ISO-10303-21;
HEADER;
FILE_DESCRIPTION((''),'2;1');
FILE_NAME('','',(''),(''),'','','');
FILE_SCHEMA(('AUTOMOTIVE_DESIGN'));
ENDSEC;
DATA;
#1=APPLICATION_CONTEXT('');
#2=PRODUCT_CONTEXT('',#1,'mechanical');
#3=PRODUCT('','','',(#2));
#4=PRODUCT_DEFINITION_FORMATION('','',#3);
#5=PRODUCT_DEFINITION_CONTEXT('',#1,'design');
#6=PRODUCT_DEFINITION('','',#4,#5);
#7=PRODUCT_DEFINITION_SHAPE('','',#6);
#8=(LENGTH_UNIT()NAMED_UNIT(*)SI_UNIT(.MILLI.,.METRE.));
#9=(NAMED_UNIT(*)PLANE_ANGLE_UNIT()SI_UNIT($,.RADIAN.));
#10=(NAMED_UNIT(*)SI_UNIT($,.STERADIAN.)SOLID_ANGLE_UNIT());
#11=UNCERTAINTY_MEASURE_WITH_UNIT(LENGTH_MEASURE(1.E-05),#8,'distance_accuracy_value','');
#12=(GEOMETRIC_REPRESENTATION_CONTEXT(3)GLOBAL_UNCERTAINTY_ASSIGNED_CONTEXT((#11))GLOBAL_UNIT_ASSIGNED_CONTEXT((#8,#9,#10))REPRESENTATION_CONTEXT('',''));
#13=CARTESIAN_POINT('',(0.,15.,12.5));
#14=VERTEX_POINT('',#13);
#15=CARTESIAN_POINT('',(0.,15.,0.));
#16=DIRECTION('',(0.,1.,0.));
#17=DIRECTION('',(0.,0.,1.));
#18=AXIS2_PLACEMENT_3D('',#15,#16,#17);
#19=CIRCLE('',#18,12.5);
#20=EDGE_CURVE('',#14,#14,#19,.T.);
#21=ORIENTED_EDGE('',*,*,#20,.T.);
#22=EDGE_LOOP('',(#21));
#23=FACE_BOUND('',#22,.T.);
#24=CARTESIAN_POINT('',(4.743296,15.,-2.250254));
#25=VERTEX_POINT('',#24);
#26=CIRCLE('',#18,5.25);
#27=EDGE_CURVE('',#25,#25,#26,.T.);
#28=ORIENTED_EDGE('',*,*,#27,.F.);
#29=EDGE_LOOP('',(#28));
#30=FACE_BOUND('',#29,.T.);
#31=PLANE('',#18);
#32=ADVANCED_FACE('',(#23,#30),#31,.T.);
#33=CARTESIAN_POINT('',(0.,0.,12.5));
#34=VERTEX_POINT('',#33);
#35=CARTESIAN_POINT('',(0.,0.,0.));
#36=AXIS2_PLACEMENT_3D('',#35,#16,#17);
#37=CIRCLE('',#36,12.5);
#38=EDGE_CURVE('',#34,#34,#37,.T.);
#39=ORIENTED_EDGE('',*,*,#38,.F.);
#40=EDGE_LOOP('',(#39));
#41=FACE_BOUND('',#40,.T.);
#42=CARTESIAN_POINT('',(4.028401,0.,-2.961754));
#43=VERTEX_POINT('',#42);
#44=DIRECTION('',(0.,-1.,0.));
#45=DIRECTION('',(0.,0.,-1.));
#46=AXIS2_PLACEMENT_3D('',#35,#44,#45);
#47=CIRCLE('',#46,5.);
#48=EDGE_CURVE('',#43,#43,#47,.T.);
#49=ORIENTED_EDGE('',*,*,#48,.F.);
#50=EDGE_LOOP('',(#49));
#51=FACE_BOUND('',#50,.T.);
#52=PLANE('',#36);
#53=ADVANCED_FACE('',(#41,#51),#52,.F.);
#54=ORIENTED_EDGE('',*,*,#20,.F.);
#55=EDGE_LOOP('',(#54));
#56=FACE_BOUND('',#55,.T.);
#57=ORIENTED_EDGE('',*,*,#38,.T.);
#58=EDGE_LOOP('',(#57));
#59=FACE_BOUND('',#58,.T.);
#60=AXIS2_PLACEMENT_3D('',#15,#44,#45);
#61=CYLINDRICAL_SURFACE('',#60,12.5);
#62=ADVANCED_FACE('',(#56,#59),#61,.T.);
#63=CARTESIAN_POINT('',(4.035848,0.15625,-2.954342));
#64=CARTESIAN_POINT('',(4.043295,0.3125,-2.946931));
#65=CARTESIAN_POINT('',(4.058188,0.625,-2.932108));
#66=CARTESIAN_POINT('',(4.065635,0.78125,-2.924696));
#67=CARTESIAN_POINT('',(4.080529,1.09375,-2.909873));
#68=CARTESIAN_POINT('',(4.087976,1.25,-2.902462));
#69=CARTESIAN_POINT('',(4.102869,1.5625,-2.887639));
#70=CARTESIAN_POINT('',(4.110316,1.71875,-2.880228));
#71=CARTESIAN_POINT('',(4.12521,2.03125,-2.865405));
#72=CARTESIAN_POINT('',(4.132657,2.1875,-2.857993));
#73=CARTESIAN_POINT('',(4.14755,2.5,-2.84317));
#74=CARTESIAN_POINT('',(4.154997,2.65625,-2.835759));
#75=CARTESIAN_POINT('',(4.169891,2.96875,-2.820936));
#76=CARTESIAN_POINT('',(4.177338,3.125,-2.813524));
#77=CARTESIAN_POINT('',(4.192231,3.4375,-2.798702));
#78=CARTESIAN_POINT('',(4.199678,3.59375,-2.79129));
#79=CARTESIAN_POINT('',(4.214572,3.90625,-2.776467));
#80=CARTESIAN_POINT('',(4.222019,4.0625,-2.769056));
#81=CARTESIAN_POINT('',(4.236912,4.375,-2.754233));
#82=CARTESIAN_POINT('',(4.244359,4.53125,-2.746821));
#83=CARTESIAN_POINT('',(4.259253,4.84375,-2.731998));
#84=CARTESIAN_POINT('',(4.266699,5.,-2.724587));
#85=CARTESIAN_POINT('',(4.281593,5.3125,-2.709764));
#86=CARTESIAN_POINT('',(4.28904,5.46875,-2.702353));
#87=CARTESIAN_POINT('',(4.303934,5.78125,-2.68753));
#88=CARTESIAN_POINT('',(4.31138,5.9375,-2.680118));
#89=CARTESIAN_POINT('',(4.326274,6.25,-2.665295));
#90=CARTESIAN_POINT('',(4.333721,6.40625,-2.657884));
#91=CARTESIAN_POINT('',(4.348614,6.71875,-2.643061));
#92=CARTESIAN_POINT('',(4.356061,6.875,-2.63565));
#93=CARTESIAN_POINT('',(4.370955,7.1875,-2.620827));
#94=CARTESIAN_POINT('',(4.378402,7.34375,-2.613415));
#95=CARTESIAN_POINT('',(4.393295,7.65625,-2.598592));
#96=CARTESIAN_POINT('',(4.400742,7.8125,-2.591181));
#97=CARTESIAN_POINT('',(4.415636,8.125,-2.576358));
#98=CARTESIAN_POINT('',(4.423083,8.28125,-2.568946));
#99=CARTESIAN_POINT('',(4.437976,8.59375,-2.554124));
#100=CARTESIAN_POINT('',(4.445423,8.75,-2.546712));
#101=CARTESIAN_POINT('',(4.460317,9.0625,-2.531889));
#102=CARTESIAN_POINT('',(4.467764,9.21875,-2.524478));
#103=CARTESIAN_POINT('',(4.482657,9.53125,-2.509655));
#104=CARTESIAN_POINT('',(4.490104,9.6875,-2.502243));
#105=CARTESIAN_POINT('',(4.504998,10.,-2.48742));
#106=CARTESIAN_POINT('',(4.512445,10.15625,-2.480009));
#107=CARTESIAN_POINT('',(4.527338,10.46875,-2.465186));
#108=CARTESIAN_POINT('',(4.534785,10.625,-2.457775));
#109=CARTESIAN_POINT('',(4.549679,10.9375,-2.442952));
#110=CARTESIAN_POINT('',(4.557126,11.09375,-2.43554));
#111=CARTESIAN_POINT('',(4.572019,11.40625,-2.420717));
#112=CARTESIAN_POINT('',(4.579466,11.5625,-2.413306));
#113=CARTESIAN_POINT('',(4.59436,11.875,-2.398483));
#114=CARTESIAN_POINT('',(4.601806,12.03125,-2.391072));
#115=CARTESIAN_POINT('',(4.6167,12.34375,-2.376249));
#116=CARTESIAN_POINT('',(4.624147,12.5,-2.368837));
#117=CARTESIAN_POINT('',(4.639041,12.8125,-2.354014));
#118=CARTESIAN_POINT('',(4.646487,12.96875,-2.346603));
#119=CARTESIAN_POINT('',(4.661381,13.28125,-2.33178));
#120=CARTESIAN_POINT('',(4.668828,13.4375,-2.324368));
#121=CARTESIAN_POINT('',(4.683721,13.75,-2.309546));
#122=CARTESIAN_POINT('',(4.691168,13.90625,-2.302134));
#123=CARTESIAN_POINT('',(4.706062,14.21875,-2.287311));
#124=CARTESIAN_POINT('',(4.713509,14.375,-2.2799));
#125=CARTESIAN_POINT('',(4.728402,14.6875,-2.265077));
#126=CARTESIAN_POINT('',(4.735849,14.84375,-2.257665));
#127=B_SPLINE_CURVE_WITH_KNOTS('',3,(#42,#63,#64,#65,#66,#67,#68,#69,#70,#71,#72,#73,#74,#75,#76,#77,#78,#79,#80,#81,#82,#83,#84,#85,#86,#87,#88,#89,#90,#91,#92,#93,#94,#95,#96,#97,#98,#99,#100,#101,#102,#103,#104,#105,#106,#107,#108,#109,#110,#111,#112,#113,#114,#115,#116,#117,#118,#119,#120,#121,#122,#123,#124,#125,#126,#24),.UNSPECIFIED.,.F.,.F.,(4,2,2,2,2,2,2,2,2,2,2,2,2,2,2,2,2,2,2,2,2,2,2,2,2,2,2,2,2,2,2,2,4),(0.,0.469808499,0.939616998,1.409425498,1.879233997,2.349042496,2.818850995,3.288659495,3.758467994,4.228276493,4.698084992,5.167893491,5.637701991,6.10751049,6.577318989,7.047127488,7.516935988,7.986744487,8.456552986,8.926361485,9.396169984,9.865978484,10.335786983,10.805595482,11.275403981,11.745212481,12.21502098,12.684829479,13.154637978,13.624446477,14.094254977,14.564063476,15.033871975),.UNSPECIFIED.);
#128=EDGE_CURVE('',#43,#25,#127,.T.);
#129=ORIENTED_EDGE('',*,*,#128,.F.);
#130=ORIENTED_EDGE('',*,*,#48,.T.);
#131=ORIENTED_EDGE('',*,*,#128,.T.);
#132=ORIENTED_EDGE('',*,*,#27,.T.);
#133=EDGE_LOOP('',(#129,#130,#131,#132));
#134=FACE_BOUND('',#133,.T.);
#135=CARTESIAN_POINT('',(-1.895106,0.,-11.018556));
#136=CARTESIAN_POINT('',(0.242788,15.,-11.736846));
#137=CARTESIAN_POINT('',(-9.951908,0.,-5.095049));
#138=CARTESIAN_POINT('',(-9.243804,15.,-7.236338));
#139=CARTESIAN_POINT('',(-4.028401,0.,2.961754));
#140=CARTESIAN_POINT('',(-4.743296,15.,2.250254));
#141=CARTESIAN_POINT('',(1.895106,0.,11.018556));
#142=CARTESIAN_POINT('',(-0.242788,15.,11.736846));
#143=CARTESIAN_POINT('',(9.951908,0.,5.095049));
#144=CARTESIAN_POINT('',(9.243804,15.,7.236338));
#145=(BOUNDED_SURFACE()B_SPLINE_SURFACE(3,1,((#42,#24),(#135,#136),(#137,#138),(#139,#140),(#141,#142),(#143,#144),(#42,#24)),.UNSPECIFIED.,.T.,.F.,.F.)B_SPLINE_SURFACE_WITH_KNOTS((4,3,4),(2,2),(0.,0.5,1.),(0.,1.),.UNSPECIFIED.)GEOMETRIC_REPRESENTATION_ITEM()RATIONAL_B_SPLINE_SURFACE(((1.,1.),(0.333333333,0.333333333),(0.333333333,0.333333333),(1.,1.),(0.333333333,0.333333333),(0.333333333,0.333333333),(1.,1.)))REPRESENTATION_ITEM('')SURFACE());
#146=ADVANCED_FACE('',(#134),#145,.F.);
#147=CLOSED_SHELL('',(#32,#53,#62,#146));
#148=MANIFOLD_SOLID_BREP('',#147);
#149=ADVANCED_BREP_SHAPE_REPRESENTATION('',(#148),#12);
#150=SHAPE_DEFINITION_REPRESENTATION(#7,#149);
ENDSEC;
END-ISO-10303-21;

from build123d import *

# Parameters (mm, degrees)
SKETCH1_R           = 12.5
SKETCH1_R_2         = 5
BOSS_EXTRUDE1_DEPTH = 15


with BuildPart() as part:
    # Sketch1 → Boss-Extrude1 (new body)
    with BuildSketch(Plane(origin=(0, 0, 0), x_dir=(1, 0, 0), z_dir=(0, 1, 0))):
        with Locations(Location((0, 0, 0), (0, 0, 270))):
            Circle(SKETCH1_R)
        with Locations(Location((0, 0, 0), (0, 0, 270))):
            Circle(SKETCH1_R_2, mode=Mode.SUBTRACT)
    extrude(amount=BOSS_EXTRUDE1_DEPTH)

    # Cut-Loft1: read off the stored shape, not the designer's step
    # Cut-Loft1: loft between two sections, ruled curve by curve
    cut_loft1_from = [
        Edge.make_bspline([(4.028401148, 0, -2.961753567), (-1.895105985, 0, -11.018555863), (-9.951908281, 0, -5.09504873), (-4.028401148, 0, 2.961753567), (1.895105985, 0, 11.018555863), (9.951908281, 0, 5.09504873), (4.028401148, 0, -2.961753567)], [0, 0, 0, 0, 0.5, 0.5, 0.5, 1, 1, 1, 1], 3, [1, 0.333333333, 0.333333333, 1, 0.333333333, 0.333333333, 1]),
    ]
    cut_loft1_to = [
        Edge.make_bspline([(4.743296063, 15, -2.250253865), (0.242788334, 15, -11.736845991), (-9.243803793, 15, -7.236338262), (-4.743296063, 15, 2.250253865), (-0.242788334, 15, 11.736845991), (9.243803793, 15, 7.236338262), (4.743296063, 15, -2.250253865)], [0, 0, 0, 0, 0.5, 0.5, 0.5, 1, 1, 1, 1], 3, [1, 0.333333333, 0.333333333, 1, 0.333333333, 0.333333333, 1]),
    ]
    cut_loft1 = Solid(Shell([*[Face.make_surface_from_curves(cut_loft1_from[k], cut_loft1_to[k]) for k in range(1)], Face(Wire(cut_loft1_from)), Face(Wire(cut_loft1_to))]))
    add(cut_loft1, mode=Mode.SUBTRACT)


solid = part.part
